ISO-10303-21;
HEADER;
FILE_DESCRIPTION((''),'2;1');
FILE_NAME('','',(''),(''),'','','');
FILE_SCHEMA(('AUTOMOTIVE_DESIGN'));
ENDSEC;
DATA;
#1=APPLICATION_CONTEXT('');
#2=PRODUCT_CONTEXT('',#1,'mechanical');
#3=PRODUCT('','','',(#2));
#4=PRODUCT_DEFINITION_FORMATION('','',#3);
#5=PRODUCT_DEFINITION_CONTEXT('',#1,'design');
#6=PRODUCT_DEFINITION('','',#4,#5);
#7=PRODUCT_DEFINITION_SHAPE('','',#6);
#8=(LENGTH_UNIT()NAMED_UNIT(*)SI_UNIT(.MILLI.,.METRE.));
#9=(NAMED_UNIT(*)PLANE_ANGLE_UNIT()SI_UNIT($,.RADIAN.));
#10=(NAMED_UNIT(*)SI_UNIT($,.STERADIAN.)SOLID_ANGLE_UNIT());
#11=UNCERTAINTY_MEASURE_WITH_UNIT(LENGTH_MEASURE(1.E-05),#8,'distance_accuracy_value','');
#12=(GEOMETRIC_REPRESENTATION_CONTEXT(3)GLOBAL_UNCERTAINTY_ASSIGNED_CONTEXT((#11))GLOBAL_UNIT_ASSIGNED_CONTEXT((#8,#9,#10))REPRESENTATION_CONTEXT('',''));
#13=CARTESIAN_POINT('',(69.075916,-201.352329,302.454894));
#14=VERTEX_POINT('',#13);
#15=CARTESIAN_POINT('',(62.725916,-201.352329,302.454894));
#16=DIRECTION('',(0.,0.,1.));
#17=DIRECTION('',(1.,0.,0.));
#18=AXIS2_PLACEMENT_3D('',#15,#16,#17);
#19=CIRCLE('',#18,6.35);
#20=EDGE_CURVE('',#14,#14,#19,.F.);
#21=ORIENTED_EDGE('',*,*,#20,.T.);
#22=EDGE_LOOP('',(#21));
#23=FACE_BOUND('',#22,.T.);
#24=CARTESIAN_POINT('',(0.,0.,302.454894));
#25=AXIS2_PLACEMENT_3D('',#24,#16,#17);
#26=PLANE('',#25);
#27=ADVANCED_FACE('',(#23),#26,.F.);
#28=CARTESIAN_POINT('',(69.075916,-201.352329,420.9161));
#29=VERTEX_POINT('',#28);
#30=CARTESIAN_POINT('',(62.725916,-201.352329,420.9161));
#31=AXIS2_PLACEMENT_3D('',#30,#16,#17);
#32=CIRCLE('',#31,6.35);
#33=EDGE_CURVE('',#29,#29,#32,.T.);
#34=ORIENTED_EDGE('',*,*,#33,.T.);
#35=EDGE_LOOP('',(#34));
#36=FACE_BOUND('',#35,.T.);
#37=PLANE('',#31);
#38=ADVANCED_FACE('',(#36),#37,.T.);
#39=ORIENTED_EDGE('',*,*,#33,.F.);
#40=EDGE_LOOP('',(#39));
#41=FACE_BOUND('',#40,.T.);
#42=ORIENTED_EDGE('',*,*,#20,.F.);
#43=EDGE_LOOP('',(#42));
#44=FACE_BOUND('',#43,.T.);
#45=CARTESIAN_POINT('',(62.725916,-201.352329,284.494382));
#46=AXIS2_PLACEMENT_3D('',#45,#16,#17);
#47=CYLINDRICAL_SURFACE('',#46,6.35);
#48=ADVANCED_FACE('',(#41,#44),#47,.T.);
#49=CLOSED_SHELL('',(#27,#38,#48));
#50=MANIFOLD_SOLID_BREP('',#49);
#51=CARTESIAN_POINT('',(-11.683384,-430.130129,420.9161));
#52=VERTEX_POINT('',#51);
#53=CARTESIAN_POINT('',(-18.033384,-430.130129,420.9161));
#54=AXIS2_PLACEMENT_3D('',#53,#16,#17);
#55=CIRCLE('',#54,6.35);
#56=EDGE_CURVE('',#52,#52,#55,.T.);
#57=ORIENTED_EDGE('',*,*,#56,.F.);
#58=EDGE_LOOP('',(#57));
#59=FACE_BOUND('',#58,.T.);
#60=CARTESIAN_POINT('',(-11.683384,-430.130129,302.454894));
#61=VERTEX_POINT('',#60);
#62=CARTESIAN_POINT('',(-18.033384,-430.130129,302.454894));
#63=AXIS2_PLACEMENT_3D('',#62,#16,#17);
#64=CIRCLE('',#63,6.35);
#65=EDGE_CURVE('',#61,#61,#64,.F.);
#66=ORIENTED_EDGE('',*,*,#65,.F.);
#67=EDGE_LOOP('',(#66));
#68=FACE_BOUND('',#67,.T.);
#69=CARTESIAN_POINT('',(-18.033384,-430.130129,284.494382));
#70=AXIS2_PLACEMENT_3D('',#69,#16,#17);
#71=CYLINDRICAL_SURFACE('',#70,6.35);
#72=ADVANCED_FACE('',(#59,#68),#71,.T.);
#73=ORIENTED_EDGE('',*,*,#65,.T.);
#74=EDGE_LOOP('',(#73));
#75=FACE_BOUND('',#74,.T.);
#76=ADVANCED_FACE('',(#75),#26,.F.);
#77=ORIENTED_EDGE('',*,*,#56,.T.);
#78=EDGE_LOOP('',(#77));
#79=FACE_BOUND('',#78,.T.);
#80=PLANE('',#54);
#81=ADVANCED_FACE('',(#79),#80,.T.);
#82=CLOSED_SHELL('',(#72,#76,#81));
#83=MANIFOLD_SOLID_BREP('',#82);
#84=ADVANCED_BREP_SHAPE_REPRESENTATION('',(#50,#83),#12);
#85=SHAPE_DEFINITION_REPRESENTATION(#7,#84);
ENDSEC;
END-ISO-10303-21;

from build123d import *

# Parameters (mm, degrees)
BOSS_EXTRUDE1_START     = -118.461205854
BOSS_EXTRUDE1_OUTLINE_R = 6.35
BOSS_EXTRUDE1_DEPTH     = 118.461205854
SKETCH3_R               = 6.35
BOSS_EXTRUDE2_DEPTH     = 118.461205854


# Read off the part's stored shape, not the designer's step: Boss-Extrude1
with BuildPart() as part:
    # Boss-Extrude1 outline → Boss-Extrude1 (new body)
    with BuildSketch(Plane.XY.offset(420.9161).offset(BOSS_EXTRUDE1_START)):
        with Locations((62.725916196, -201.352329346)):
            Circle(BOSS_EXTRUDE1_OUTLINE_R)
    extrude(amount=BOSS_EXTRUDE1_DEPTH)


with BuildPart() as body_2:
    # Sketch3 → Boss-Extrude2 (new body)
    with BuildSketch(Plane.XY.offset(420.9161)):
        with Locations((-18.033383804, -430.130129346)):
            Circle(SKETCH3_R)
    extrude(amount=-BOSS_EXTRUDE2_DEPTH)


solid = Compound([part.part, body_2.part])
